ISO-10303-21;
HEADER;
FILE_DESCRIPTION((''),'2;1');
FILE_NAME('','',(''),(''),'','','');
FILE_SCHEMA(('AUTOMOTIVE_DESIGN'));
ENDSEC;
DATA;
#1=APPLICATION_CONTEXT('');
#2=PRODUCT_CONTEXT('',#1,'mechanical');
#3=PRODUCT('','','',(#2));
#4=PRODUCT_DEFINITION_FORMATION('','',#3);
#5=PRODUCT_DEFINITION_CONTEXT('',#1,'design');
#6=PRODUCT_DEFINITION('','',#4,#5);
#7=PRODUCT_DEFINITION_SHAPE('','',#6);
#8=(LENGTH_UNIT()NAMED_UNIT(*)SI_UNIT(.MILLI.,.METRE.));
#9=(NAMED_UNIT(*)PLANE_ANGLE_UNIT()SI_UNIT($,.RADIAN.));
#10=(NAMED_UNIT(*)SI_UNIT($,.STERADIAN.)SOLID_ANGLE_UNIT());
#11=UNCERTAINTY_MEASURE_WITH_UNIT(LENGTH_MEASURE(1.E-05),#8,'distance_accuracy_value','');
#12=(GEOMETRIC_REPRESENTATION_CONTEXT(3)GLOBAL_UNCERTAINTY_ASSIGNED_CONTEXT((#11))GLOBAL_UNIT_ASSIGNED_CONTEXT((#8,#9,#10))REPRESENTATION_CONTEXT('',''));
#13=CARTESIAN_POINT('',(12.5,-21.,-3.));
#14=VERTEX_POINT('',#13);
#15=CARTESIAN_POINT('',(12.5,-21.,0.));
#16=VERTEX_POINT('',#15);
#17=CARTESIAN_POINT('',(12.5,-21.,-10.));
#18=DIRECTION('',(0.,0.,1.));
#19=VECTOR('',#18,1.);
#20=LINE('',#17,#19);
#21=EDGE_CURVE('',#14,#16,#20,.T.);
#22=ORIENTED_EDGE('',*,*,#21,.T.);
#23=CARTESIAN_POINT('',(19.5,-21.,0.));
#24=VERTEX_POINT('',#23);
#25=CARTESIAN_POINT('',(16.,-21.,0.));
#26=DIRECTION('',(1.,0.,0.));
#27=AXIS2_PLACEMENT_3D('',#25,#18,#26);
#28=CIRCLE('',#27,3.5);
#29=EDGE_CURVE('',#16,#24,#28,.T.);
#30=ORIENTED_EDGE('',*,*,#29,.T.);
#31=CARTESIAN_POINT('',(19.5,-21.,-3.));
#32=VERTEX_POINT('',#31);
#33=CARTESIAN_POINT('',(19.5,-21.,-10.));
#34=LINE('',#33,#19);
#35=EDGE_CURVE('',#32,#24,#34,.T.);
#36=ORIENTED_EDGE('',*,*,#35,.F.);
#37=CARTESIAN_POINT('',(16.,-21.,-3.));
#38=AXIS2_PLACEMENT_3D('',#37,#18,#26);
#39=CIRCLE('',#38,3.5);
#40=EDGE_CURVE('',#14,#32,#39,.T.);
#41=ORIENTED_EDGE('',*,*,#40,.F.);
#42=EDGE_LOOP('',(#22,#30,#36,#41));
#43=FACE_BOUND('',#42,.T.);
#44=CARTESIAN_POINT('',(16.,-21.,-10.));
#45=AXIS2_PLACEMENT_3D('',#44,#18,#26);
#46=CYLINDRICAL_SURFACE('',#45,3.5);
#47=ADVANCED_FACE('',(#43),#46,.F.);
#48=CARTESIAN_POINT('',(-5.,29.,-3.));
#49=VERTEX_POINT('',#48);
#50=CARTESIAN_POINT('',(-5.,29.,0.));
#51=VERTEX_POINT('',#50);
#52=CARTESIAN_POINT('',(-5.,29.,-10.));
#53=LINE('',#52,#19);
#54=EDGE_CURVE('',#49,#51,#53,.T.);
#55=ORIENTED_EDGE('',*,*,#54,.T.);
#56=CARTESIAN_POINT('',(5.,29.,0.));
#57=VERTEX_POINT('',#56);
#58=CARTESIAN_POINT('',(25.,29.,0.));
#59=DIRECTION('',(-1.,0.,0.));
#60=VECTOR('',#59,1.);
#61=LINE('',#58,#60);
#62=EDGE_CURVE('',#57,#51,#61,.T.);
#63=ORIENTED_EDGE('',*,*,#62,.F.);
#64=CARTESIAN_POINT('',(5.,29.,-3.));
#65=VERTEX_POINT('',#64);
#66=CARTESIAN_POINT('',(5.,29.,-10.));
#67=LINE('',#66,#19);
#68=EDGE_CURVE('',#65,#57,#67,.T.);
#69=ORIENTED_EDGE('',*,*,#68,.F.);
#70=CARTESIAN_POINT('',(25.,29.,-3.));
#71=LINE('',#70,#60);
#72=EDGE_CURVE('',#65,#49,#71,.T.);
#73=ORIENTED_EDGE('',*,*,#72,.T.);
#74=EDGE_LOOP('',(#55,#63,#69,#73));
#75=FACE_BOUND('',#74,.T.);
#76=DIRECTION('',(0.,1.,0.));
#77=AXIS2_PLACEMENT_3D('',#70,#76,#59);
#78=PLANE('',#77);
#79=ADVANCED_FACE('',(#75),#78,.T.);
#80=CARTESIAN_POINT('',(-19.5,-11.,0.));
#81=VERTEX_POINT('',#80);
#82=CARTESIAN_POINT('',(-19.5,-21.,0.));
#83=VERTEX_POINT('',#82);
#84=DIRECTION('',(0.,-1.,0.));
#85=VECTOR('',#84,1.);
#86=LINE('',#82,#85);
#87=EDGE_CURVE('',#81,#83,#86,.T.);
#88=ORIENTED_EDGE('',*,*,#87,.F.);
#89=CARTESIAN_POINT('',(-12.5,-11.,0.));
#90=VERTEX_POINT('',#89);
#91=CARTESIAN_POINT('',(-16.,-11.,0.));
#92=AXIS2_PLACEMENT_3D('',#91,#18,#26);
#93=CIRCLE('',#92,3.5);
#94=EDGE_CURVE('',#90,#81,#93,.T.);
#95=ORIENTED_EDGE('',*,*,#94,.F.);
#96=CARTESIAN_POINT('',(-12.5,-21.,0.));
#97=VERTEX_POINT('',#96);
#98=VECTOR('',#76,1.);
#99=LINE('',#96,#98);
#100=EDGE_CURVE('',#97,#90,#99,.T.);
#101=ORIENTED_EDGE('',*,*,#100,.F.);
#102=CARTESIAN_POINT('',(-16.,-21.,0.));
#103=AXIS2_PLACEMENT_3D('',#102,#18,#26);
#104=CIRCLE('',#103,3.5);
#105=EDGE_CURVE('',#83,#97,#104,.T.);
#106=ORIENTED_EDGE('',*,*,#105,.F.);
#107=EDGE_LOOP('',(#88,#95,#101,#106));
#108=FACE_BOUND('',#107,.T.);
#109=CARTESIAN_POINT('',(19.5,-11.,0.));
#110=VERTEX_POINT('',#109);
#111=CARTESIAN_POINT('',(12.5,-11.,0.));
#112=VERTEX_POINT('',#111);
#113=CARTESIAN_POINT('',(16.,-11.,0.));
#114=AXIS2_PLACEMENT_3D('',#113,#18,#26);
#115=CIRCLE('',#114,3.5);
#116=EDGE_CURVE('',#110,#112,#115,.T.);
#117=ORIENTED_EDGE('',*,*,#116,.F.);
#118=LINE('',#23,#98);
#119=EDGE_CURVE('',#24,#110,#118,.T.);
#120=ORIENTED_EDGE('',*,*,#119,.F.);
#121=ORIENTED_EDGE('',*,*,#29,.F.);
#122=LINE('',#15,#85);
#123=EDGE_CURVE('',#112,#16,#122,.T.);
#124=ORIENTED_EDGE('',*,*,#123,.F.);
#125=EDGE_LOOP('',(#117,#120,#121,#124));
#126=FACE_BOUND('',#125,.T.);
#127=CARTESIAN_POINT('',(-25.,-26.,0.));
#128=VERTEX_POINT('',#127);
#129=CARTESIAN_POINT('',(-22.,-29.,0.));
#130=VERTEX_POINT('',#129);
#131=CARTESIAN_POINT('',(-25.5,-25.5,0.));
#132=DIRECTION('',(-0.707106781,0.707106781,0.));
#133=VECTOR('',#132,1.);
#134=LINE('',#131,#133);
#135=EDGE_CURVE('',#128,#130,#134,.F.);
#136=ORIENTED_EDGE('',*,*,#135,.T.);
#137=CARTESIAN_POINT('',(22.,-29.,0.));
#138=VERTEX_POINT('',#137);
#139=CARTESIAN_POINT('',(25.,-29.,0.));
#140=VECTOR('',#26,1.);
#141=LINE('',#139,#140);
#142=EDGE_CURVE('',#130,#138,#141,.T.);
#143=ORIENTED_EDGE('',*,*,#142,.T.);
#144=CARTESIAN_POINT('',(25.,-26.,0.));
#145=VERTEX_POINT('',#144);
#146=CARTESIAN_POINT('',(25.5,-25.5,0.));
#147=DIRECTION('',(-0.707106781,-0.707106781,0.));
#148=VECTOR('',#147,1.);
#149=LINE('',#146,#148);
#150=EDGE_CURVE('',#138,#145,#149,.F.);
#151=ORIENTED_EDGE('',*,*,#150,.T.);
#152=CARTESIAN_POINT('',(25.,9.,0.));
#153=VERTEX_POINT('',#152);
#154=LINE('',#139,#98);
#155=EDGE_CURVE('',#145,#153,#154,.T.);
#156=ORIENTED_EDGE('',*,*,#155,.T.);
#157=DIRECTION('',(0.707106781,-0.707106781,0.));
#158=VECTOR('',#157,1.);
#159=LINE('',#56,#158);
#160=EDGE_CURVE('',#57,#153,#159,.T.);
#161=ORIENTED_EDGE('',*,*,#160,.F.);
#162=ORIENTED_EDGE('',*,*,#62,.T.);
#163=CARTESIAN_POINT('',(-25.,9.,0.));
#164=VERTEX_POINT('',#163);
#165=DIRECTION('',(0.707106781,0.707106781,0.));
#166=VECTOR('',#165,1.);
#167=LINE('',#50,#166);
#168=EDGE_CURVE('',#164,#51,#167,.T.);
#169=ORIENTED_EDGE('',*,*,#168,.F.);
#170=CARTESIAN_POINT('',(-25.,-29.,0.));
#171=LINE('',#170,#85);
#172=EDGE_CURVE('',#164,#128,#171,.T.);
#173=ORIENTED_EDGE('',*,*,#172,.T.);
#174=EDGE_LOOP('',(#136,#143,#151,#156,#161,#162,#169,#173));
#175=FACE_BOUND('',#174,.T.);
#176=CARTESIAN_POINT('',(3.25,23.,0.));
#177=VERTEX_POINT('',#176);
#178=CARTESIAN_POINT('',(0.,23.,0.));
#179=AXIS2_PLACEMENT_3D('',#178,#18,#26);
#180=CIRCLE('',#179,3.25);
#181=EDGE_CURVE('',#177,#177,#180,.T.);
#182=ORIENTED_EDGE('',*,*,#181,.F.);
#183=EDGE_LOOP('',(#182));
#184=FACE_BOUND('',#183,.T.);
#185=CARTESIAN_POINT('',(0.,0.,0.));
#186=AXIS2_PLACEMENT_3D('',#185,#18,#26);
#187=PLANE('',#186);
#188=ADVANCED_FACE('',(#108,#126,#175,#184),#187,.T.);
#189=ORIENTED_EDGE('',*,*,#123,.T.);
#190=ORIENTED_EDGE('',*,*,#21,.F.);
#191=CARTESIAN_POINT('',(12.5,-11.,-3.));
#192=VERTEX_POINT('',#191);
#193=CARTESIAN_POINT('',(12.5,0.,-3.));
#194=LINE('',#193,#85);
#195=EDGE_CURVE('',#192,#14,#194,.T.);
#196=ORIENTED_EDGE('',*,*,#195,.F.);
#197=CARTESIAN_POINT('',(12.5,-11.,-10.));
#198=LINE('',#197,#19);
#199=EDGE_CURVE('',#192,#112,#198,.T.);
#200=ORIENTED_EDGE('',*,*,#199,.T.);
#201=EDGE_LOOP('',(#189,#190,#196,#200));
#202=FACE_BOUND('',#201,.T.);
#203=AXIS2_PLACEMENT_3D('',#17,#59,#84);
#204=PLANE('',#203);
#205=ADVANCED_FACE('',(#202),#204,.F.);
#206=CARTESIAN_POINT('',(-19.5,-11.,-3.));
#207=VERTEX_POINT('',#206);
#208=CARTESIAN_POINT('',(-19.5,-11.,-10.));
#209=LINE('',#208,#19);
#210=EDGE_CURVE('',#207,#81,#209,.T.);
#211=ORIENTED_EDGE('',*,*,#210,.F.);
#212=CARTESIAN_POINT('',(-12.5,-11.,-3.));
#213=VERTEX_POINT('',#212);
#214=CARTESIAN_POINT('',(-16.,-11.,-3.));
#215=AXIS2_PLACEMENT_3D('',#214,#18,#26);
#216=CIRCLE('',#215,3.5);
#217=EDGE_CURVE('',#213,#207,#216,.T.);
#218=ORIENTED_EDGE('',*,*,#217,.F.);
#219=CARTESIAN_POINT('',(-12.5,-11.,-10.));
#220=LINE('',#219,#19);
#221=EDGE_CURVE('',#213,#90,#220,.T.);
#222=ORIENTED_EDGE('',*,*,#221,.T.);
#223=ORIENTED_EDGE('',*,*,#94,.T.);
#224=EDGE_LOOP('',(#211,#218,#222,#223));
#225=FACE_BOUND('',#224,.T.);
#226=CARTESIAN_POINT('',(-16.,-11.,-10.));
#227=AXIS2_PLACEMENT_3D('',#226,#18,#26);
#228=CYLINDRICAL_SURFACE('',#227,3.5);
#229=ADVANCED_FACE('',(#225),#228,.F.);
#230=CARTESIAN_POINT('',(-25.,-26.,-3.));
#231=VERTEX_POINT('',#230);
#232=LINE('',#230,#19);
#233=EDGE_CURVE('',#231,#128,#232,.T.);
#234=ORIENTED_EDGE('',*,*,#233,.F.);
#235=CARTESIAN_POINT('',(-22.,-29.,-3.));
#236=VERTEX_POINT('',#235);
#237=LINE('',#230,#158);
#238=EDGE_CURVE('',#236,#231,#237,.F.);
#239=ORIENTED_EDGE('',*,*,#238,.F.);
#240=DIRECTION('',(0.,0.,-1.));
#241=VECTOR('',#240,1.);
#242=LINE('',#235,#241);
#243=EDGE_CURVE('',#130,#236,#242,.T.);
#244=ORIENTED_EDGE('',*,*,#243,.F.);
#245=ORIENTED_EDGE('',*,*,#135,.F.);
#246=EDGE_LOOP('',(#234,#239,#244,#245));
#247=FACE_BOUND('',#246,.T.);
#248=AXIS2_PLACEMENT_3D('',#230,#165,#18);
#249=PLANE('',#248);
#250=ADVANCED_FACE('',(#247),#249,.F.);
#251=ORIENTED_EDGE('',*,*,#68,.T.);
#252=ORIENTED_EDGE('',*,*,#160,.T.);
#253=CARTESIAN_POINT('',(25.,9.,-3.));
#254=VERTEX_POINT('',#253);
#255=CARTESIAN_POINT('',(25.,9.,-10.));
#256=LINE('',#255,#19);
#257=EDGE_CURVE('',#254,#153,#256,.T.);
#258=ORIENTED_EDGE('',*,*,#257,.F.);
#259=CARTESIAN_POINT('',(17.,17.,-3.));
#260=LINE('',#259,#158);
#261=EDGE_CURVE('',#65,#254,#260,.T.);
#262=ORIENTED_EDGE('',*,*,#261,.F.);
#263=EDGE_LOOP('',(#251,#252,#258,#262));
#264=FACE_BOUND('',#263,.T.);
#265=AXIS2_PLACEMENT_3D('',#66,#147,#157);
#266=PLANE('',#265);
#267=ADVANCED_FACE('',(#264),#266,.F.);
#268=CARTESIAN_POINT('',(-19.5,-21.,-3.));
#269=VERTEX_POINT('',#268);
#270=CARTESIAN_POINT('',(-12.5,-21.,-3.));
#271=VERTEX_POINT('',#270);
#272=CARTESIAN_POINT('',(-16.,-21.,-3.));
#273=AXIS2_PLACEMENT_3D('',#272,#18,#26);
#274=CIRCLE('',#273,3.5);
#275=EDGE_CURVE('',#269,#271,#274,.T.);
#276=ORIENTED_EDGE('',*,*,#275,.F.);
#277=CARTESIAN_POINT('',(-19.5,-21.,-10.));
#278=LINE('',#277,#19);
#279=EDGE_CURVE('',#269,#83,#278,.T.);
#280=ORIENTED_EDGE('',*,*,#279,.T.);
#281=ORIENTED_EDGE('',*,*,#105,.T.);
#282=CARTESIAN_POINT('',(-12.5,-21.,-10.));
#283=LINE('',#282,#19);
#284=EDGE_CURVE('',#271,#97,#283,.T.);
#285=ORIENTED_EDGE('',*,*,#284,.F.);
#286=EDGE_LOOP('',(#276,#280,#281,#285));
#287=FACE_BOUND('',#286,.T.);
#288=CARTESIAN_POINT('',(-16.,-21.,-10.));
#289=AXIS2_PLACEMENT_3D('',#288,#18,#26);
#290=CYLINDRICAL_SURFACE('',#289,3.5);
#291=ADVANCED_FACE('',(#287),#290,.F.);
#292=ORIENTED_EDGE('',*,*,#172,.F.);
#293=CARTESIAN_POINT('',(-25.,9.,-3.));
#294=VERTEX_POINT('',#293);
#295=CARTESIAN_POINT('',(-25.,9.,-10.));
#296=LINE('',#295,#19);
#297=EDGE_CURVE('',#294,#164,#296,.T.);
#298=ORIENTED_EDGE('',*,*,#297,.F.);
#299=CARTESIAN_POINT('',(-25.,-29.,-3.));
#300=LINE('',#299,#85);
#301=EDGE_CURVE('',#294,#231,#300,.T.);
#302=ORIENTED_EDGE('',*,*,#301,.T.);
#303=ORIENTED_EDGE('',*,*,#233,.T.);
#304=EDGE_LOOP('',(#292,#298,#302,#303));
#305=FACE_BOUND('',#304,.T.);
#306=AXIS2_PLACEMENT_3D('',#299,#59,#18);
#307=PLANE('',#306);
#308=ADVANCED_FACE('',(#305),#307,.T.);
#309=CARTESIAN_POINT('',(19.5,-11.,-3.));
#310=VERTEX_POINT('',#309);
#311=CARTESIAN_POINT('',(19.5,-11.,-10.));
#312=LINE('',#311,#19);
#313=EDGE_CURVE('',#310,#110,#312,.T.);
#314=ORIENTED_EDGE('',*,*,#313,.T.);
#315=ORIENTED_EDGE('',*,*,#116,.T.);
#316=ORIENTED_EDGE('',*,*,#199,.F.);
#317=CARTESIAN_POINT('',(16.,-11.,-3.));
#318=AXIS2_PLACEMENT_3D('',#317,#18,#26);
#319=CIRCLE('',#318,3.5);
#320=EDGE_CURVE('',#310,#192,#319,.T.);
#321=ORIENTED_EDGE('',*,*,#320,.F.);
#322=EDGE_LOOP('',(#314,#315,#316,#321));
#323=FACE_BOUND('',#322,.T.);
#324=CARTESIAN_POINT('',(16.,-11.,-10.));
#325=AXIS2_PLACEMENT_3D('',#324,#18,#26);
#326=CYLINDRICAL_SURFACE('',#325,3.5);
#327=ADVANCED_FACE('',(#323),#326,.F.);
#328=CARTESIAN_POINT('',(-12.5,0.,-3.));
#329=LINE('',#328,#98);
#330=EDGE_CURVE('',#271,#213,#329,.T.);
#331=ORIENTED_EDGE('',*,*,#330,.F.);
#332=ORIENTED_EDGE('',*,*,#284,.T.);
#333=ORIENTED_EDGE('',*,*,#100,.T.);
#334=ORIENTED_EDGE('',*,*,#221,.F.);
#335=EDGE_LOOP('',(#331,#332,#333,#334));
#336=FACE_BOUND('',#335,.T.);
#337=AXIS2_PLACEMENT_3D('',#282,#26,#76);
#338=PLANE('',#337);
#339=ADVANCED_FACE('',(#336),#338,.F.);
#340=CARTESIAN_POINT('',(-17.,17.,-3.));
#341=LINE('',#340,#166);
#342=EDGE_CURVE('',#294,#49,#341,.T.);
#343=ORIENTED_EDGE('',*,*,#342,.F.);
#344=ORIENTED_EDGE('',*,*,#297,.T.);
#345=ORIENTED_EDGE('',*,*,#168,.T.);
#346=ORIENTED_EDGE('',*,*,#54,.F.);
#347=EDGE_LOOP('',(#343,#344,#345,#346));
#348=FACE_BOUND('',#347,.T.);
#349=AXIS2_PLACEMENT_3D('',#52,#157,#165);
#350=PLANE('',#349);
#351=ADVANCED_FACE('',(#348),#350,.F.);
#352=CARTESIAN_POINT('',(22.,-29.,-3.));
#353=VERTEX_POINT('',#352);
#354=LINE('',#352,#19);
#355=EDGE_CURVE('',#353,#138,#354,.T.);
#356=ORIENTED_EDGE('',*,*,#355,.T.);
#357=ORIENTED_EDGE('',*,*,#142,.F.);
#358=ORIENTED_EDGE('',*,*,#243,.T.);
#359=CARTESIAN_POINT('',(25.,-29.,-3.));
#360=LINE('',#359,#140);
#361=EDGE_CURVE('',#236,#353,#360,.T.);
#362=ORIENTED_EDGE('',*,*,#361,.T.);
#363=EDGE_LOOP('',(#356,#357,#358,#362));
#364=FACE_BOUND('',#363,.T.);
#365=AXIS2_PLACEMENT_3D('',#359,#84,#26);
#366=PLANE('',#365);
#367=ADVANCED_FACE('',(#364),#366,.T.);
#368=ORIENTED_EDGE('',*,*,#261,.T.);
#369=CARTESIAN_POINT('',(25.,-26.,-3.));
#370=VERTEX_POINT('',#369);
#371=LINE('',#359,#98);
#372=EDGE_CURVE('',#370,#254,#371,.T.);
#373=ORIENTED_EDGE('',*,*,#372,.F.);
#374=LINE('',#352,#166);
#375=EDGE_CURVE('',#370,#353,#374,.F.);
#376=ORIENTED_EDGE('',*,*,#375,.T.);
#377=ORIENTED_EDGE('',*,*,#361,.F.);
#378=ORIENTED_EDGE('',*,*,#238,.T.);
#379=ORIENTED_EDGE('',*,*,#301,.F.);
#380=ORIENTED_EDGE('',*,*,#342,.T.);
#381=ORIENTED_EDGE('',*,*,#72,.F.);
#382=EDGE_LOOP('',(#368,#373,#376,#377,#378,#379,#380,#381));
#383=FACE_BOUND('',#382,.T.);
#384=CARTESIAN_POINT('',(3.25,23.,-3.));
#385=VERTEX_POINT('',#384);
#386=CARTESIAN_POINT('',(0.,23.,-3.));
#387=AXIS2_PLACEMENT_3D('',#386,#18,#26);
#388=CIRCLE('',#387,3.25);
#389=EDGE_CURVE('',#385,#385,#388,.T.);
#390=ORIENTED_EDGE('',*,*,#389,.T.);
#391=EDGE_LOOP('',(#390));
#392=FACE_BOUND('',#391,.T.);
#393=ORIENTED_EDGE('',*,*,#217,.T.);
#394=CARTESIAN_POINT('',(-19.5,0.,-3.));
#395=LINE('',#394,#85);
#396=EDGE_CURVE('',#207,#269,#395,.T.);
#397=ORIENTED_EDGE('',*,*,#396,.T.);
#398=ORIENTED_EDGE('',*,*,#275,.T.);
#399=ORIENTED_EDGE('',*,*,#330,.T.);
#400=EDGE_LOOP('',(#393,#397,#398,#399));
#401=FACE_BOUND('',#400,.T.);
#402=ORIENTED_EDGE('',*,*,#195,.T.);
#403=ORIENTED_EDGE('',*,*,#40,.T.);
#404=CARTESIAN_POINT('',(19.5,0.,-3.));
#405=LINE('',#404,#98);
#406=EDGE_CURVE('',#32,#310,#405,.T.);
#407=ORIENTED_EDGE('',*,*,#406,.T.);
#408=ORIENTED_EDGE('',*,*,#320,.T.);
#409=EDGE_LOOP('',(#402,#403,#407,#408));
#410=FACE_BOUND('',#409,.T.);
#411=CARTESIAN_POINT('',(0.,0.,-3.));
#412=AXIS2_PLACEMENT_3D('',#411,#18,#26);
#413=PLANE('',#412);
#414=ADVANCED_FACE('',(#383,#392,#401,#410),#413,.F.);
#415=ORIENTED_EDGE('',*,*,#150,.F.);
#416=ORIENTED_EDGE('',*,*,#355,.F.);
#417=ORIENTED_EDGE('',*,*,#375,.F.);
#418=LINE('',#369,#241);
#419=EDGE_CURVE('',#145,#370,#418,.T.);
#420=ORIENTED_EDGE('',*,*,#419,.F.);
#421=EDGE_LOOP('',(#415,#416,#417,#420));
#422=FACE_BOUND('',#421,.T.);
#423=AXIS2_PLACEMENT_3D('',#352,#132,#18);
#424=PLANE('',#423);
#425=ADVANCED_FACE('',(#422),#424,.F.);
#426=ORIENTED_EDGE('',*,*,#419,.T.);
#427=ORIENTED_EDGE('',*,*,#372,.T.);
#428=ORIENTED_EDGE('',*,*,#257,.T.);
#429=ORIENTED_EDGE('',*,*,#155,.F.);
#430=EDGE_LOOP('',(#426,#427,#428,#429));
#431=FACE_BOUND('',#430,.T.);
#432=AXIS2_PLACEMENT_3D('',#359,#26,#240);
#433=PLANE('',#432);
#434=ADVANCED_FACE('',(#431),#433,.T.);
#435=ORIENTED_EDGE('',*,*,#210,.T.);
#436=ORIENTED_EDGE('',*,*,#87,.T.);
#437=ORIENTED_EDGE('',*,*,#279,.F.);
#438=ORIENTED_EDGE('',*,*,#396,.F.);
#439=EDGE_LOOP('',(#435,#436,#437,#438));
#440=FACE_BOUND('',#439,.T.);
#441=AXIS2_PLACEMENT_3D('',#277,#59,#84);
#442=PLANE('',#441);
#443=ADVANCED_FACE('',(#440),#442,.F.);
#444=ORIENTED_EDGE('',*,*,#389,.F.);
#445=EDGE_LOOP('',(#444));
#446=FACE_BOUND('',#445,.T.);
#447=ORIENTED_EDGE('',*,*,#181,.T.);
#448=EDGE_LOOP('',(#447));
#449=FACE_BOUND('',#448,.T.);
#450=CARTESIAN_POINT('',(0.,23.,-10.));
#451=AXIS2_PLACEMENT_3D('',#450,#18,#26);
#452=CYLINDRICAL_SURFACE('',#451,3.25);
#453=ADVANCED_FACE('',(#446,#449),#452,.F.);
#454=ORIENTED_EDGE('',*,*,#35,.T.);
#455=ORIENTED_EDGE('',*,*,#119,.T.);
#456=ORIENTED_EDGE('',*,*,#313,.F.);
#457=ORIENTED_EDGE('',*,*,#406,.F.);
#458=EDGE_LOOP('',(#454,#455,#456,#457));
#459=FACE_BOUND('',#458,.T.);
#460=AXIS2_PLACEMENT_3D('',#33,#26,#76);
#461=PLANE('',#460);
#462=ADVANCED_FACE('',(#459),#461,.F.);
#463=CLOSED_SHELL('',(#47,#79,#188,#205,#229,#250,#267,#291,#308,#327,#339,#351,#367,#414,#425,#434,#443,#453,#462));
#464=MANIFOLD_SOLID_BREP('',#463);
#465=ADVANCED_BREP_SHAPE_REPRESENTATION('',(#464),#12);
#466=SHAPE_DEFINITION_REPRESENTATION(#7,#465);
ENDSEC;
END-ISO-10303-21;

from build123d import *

# Parameters (mm, degrees)
SKETCH_1_W             = 50
SKETCH_1_H             = 58
SM_BASE_FLANGE_1_DEPTH = 3
SKETCH_2_R             = 3.25
CUT_EXTRUDE_1_DEPTH    = 10
HOLE_WIZARD_7_0_7_1_D  = 7
CHAMFER_1_SIZE         = 3
CUT_EXTRUDE_2_DEPTH    = 10
CUT_EXTRUDE_3_DEPTH    = 10


# Sheet-metal steps are written as plain solids
with BuildPart() as part:
    # Sketch 1 → 基体-法兰1 (new body)
    with BuildSketch(Plane.XY):
        Rectangle(SKETCH_1_W, SKETCH_1_H)
    extrude(amount=-SM_BASE_FLANGE_1_DEPTH)

    # Sketch 2 → 切除-拉伸1 (cut)
    with BuildSketch(Plane.XY):
        with Locations((0, 23)):
            Circle(SKETCH_2_R)
    extrude(amount=-CUT_EXTRUDE_1_DEPTH, mode=Mode.SUBTRACT)

    # Ø7.0 (7) 直径孔1 (through all)
    with Locations(Plane.XY):
        with Locations((-16, -11.5), (16, -11.5)):
            Hole(HOLE_WIZARD_7_0_7_1_D / 2)

    # 倒角1
    chamfer_1_edges = [part.edges().sort_by_distance(p)[0] for p in [
        (25, -29, -1.5),
        (-25, -29, -1.5),
    ]]
    chamfer(chamfer_1_edges, length=CHAMFER_1_SIZE)

    # 草图5 → 切除-拉伸2 (cut)
    with BuildSketch(Plane.XY):
        Polygon((-5, 29), (-25, 9), (-25, 29), align=None)
        Polygon((25, 29), (5, 29), (25, 9), align=None)
    extrude(amount=-CUT_EXTRUDE_2_DEPTH, mode=Mode.SUBTRACT)

    # 草图7 → 切除-拉伸3 (cut)
    with BuildSketch(Plane.XY):
        with BuildLine():
            Line((-19.5, -21), (-19.5, -11))
            ThreePointArc((-19.5, -11), (-16, -7.5), (-12.5, -11))
            Line((-12.5, -11), (-12.5, -21))
            ThreePointArc((-12.5, -21), (-16, -24.5), (-19.5, -21))
        make_face()
        with BuildLine():
            Line((12.5, -21), (12.5, -11))
            ThreePointArc((12.5, -11), (16, -7.5), (19.5, -11))
            Line((19.5, -11), (19.5, -21))
            ThreePointArc((19.5, -21), (16, -24.5), (12.5, -21))
        make_face()
    extrude(amount=-CUT_EXTRUDE_3_DEPTH, mode=Mode.SUBTRACT)


solid = part.part
